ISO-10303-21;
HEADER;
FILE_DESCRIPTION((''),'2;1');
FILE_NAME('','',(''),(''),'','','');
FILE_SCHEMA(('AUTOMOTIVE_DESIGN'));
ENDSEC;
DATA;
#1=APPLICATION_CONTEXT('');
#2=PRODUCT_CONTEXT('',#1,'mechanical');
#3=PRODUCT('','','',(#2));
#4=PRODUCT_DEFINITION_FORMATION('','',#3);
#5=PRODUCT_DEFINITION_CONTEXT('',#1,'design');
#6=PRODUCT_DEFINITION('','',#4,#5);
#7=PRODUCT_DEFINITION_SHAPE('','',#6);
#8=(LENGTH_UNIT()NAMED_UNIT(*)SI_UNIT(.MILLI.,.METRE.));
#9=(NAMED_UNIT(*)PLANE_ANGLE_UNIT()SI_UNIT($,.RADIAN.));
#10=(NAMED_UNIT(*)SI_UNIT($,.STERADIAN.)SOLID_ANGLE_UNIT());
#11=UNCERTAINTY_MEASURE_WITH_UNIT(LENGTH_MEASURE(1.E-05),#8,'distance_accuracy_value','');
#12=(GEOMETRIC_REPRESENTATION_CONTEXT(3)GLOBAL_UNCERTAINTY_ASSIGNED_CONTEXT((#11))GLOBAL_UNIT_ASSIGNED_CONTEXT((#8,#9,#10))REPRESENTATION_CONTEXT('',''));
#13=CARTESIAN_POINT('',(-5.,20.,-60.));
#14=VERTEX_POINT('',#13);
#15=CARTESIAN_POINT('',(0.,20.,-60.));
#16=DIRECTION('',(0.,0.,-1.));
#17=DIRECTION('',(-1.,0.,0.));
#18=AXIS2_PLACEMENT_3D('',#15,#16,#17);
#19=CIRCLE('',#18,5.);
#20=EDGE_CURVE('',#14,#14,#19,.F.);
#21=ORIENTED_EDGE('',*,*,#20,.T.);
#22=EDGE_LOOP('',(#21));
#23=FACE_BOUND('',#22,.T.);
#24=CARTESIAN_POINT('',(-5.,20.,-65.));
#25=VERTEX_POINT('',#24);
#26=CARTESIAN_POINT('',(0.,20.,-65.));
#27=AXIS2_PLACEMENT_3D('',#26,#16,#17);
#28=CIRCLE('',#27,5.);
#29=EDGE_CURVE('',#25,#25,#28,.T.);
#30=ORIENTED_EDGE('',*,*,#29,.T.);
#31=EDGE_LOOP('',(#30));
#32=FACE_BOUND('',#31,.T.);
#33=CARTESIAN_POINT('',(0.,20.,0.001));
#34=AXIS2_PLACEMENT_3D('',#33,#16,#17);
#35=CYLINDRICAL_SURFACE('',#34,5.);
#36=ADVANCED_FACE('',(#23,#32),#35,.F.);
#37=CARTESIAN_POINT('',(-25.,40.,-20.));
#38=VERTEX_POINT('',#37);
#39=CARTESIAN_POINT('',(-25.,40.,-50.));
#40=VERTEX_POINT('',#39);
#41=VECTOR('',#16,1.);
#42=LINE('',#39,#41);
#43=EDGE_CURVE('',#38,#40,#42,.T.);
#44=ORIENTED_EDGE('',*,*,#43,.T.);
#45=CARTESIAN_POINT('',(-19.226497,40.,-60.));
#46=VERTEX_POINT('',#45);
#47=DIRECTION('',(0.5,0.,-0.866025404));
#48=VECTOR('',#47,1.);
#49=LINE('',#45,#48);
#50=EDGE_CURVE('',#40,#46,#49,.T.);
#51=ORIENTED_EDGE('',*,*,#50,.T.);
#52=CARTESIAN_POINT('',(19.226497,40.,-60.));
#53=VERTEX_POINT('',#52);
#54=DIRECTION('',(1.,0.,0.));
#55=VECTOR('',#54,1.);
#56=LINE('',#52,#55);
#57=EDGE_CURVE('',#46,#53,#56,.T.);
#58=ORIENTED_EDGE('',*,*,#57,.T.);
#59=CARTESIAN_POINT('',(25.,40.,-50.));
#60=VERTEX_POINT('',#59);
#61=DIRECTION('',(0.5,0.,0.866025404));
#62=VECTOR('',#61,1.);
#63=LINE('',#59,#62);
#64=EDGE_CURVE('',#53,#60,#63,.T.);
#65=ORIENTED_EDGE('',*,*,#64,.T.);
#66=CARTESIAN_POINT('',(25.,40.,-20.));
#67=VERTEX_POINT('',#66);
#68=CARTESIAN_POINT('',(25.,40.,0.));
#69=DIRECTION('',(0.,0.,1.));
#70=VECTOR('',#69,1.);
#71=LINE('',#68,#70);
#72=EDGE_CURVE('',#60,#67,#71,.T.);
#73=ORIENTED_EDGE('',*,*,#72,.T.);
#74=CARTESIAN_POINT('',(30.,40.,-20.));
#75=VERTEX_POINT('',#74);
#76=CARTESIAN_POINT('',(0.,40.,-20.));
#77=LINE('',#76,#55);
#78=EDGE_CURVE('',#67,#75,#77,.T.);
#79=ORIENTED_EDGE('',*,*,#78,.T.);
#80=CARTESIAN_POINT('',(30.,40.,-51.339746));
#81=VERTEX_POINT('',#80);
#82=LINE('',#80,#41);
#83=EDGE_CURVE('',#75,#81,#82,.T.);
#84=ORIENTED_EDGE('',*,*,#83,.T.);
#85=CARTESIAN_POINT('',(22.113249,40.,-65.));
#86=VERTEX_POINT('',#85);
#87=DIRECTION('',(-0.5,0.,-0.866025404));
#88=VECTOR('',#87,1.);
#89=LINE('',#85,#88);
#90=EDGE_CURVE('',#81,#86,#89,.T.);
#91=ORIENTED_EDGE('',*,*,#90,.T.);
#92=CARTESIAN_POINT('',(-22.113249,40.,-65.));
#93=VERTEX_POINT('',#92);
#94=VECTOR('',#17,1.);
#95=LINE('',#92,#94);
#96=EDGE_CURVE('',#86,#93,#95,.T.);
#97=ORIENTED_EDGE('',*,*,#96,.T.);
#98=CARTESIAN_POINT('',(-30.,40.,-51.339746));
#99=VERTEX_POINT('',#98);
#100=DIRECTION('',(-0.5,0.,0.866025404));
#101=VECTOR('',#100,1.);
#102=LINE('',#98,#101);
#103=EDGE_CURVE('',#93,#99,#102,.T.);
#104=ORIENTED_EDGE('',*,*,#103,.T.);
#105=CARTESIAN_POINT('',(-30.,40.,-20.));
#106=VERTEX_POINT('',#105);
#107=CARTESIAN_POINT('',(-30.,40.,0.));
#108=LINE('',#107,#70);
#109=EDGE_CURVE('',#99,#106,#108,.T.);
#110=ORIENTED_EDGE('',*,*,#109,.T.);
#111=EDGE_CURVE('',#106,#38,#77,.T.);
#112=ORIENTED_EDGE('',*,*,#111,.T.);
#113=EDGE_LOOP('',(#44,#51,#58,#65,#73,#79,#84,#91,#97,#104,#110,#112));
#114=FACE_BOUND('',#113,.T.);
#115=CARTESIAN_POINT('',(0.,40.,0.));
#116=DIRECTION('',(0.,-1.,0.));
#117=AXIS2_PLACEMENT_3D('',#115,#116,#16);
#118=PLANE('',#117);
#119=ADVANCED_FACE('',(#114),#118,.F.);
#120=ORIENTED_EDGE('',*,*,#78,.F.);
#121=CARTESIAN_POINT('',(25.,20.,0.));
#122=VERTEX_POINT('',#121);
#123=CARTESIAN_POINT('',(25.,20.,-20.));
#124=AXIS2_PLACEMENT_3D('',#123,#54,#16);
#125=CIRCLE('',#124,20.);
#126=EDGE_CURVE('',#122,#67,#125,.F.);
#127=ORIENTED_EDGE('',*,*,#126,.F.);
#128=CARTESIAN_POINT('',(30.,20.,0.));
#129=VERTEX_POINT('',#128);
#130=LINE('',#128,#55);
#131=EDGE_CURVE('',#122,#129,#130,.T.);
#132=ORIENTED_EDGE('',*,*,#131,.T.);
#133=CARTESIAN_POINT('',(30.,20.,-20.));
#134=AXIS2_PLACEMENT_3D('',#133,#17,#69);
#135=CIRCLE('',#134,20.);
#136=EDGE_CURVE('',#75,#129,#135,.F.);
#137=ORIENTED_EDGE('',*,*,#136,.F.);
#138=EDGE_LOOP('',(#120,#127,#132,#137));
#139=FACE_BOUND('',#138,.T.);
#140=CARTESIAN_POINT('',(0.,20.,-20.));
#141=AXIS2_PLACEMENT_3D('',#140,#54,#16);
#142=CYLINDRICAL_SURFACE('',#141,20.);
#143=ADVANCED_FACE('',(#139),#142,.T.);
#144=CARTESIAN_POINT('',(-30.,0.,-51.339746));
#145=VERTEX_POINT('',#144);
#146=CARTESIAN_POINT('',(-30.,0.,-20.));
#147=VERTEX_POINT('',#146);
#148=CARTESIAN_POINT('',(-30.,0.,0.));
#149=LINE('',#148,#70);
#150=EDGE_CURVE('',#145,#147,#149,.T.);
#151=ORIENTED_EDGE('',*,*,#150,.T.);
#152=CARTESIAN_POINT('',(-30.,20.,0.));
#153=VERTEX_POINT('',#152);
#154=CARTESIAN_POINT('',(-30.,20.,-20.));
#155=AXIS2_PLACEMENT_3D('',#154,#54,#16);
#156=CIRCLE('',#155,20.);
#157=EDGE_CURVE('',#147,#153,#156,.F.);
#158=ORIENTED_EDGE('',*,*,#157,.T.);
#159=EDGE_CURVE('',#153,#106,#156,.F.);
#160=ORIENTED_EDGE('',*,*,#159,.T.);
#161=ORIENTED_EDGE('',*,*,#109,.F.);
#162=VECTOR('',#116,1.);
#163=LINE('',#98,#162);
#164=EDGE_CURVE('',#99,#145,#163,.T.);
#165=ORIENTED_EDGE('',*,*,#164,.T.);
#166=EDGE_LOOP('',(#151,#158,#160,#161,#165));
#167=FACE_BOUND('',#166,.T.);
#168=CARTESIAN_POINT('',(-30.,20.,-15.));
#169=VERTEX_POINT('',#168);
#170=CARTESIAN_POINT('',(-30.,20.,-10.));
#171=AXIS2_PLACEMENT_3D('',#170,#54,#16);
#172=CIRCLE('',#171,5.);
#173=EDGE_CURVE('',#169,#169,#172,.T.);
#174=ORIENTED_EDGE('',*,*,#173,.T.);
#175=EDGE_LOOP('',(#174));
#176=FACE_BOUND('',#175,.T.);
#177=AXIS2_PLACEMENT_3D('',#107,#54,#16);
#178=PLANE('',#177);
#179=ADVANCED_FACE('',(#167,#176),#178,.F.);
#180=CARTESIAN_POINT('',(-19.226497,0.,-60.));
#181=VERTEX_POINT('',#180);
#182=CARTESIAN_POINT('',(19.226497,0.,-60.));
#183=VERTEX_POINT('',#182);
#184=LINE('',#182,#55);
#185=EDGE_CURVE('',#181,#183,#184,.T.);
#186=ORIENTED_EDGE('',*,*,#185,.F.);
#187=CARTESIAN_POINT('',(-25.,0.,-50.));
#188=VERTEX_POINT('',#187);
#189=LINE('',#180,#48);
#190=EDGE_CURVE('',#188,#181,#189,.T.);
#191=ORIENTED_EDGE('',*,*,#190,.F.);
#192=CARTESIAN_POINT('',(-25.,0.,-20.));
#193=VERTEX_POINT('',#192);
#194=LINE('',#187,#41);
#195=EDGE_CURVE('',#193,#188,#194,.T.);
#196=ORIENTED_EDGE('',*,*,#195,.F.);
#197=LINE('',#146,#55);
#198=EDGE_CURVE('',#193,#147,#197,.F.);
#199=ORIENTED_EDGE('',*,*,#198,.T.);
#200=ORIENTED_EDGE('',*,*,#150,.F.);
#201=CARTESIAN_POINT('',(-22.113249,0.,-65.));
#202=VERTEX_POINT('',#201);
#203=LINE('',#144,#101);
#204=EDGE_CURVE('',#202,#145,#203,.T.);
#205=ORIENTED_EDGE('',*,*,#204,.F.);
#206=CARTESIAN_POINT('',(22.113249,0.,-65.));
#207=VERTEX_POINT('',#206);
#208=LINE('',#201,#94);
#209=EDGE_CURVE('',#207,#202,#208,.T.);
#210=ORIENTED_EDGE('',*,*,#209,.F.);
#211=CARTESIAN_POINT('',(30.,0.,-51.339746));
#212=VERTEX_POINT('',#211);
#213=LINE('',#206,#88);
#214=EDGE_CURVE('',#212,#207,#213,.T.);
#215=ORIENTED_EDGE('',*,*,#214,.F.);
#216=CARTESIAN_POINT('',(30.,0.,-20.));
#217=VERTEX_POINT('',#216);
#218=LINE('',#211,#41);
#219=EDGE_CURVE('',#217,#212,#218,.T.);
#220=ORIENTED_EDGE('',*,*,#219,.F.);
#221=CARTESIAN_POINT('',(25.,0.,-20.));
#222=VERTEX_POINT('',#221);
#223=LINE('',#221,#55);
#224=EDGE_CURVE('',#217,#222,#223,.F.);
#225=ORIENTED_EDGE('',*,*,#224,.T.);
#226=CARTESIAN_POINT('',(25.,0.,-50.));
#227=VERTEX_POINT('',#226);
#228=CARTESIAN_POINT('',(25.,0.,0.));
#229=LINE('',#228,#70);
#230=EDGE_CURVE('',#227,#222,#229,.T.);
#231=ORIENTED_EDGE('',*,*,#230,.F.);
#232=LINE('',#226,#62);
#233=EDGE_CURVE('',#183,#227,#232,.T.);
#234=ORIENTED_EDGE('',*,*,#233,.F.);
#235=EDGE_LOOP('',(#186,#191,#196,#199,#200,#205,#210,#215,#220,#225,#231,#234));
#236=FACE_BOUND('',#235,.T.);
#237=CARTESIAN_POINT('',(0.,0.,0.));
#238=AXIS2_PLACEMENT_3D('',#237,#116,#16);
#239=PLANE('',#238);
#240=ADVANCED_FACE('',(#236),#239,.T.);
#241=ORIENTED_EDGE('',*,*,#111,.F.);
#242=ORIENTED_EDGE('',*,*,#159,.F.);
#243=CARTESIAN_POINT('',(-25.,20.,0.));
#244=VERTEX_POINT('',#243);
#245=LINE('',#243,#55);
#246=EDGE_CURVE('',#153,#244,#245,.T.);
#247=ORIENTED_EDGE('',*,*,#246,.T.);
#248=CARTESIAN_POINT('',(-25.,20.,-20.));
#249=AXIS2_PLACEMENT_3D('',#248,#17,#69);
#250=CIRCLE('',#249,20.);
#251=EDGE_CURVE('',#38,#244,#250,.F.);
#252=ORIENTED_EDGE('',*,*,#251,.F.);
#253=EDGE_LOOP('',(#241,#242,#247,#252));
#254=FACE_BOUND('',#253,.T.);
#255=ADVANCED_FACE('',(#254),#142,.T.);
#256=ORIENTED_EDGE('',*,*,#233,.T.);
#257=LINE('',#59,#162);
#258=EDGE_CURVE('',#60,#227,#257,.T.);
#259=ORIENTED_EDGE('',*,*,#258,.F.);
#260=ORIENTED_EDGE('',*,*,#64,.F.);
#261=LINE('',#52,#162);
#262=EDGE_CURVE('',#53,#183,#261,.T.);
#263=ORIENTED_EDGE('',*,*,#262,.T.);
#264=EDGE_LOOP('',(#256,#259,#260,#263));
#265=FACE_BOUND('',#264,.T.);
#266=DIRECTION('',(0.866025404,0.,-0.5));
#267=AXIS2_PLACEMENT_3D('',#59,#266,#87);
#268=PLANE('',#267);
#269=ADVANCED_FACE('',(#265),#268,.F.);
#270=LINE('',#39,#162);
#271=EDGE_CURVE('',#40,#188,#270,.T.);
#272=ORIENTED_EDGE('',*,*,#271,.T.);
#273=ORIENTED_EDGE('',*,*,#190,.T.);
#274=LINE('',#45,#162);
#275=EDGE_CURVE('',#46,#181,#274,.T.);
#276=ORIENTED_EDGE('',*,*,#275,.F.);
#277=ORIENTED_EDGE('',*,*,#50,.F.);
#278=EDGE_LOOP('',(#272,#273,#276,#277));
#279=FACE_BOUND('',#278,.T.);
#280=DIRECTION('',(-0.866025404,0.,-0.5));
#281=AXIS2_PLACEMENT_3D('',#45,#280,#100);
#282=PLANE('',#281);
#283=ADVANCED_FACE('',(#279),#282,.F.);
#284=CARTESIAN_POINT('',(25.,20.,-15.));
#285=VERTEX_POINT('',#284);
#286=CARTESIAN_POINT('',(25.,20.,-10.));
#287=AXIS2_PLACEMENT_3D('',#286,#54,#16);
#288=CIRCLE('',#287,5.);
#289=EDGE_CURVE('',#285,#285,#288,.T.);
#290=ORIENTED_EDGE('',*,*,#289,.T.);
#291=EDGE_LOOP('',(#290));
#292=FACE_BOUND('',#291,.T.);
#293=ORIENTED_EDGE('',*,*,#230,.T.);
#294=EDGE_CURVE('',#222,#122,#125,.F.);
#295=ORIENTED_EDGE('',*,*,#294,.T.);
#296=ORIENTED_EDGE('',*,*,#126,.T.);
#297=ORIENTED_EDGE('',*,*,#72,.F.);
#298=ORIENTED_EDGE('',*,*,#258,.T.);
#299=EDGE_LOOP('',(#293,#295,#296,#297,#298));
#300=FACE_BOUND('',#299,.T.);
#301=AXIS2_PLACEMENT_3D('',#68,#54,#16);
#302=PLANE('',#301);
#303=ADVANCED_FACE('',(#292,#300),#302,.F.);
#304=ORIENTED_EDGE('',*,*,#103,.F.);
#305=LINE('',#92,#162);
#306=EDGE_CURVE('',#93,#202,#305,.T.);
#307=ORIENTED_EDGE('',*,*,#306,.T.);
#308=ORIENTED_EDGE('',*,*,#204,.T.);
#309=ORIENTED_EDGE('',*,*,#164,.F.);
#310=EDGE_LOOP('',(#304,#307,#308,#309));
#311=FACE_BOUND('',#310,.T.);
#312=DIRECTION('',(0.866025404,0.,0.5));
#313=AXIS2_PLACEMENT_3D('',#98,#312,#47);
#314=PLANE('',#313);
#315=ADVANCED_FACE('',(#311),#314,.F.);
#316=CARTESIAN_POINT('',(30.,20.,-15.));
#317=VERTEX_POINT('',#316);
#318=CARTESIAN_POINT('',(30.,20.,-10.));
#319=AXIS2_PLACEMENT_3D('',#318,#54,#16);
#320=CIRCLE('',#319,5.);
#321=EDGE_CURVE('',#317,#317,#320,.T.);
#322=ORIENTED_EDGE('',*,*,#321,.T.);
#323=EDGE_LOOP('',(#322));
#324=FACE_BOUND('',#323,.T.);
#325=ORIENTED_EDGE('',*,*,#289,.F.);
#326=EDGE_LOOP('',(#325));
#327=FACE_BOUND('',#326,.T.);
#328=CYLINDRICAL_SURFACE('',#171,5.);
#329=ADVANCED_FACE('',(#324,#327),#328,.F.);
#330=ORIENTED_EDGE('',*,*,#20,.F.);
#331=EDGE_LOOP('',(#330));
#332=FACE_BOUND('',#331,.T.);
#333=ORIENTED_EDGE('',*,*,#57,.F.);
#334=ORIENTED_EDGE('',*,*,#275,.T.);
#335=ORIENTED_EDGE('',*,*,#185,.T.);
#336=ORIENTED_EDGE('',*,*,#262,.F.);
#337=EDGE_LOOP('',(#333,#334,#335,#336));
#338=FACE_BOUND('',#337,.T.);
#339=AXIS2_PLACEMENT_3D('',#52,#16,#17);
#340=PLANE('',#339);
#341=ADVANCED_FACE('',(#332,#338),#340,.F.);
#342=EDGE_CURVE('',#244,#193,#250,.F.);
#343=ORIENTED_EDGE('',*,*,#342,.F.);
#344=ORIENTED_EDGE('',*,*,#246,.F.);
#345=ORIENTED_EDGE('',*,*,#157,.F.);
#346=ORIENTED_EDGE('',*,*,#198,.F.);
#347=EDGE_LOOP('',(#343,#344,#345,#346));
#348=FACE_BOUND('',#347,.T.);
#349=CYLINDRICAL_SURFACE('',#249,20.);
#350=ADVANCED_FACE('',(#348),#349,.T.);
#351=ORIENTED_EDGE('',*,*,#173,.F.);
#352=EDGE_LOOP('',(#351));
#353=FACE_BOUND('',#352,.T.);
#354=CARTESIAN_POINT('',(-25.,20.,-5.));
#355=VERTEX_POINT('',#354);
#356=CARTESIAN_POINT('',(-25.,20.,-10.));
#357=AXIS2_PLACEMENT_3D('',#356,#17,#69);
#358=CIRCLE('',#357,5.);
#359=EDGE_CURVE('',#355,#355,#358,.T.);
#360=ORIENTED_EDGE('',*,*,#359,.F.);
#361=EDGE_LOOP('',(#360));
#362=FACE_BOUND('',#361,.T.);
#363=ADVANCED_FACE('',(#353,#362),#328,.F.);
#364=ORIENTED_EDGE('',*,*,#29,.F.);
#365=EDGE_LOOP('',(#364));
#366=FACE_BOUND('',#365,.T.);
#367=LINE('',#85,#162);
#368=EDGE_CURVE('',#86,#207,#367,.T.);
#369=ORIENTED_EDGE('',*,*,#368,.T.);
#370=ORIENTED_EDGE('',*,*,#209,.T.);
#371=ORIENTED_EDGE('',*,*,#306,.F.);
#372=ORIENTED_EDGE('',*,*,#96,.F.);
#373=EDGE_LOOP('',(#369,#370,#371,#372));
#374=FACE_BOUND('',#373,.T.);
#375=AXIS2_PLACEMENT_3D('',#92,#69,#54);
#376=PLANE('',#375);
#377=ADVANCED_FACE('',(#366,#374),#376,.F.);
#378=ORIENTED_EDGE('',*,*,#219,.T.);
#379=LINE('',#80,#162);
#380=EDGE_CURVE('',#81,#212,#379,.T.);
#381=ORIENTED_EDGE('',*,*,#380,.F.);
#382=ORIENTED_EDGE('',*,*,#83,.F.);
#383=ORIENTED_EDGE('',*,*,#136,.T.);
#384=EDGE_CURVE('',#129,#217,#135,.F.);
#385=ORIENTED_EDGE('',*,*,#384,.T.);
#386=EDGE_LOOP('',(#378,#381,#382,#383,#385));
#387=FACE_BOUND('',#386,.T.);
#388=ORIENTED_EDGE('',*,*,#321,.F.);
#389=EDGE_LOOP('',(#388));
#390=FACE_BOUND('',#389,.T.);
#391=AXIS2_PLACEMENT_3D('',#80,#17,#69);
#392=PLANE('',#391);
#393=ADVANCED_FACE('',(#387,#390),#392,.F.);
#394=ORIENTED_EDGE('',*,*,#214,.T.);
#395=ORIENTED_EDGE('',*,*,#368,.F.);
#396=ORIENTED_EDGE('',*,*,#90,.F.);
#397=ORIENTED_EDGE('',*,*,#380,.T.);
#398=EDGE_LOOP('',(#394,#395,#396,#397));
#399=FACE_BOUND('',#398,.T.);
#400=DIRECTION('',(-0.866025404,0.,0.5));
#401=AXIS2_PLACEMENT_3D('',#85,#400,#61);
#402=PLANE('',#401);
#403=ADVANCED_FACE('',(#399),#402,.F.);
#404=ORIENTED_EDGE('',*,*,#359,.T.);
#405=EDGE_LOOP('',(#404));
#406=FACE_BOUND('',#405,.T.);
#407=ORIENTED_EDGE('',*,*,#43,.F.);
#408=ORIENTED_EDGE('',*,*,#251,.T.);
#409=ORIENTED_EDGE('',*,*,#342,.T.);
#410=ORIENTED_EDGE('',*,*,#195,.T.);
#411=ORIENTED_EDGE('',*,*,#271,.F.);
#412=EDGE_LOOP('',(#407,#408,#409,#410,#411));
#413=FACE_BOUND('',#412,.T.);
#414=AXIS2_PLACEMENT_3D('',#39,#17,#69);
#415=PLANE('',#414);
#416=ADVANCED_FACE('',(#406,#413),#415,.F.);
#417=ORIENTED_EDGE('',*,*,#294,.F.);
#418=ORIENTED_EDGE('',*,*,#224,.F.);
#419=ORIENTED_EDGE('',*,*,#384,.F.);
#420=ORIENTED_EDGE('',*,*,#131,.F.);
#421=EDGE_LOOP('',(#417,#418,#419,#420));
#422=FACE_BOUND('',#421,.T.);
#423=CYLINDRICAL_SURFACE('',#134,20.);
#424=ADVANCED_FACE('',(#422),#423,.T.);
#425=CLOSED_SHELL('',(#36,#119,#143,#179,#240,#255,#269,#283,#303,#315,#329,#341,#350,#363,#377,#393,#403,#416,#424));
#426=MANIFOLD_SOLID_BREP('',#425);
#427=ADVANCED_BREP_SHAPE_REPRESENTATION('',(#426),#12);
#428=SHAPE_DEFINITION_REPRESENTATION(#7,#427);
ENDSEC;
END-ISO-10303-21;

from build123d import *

# Parameters (mm, degrees)
BOSS_EXTRUDE1_DEPTH = 40
SKETCH3_R           = 5
CUT_EXTRUDE1_DEPTH  = 98.082439195
FILLET1_R           = 20
CUT_EXTRUDE2_REACH  = 84.006
SKETCH4_R           = 5


with BuildPart() as part:
    # Sketch2 → Boss-Extrude1 (new body)
    with BuildSketch(Plane(origin=(0, 0, 0), x_dir=(1, 0, 0), z_dir=(0, 1, 0))):
        Polygon((-30, 0), (-30, 51.339745962), (-22.113248654, 65), (22.113248654, 65), (30, 51.339745962), (30, 0), (25, 0), (25, 50), (19.226497308, 60), (-19.226497308, 60), (-25, 50), (-25, 0), align=None)
    extrude(amount=BOSS_EXTRUDE1_DEPTH)

    # Sketch3 → Cut-Extrude1 (cut, through all)
    with BuildSketch(Plane(origin=(30, 0, 0), x_dir=(0, 0, -1), z_dir=(1, 0, 0))):
        with Locations((10, 20)):
            Circle(SKETCH3_R)
    extrude(amount=-CUT_EXTRUDE1_DEPTH, mode=Mode.SUBTRACT)

    # Fillet1
    fillet1_edges = [part.edges().sort_by_distance(p)[0] for p in [
        (27.5, 40, 0),
        (-27.5, 40, 0),
        (-27.5, 0, 0),
        (27.5, 0, 0),
    ]]
    fillet(fillet1_edges, radius=FILLET1_R - 0.0001)  # a hair under: the kernel refuses the full size

    # Sketch4 → Cut-Extrude2 (cut, up to next)
    with BuildSketch(Plane(origin=(0, 0, -65), x_dir=(-1, 0, 0), z_dir=(0, 0, -1)), mode=Mode.PRIVATE) as cut_extrude2_sk1:
        with Locations((0, 20)):
            Circle(SKETCH4_R)
    cut_extrude2_tool1 = extrude(cut_extrude2_sk1.sketch, amount=-CUT_EXTRUDE2_REACH, mode=Mode.PRIVATE) & part.part
    add(cut_extrude2_tool1.solids().sort_by_distance((0, 20, -65))[0], mode=Mode.SUBTRACT)


solid = part.part
